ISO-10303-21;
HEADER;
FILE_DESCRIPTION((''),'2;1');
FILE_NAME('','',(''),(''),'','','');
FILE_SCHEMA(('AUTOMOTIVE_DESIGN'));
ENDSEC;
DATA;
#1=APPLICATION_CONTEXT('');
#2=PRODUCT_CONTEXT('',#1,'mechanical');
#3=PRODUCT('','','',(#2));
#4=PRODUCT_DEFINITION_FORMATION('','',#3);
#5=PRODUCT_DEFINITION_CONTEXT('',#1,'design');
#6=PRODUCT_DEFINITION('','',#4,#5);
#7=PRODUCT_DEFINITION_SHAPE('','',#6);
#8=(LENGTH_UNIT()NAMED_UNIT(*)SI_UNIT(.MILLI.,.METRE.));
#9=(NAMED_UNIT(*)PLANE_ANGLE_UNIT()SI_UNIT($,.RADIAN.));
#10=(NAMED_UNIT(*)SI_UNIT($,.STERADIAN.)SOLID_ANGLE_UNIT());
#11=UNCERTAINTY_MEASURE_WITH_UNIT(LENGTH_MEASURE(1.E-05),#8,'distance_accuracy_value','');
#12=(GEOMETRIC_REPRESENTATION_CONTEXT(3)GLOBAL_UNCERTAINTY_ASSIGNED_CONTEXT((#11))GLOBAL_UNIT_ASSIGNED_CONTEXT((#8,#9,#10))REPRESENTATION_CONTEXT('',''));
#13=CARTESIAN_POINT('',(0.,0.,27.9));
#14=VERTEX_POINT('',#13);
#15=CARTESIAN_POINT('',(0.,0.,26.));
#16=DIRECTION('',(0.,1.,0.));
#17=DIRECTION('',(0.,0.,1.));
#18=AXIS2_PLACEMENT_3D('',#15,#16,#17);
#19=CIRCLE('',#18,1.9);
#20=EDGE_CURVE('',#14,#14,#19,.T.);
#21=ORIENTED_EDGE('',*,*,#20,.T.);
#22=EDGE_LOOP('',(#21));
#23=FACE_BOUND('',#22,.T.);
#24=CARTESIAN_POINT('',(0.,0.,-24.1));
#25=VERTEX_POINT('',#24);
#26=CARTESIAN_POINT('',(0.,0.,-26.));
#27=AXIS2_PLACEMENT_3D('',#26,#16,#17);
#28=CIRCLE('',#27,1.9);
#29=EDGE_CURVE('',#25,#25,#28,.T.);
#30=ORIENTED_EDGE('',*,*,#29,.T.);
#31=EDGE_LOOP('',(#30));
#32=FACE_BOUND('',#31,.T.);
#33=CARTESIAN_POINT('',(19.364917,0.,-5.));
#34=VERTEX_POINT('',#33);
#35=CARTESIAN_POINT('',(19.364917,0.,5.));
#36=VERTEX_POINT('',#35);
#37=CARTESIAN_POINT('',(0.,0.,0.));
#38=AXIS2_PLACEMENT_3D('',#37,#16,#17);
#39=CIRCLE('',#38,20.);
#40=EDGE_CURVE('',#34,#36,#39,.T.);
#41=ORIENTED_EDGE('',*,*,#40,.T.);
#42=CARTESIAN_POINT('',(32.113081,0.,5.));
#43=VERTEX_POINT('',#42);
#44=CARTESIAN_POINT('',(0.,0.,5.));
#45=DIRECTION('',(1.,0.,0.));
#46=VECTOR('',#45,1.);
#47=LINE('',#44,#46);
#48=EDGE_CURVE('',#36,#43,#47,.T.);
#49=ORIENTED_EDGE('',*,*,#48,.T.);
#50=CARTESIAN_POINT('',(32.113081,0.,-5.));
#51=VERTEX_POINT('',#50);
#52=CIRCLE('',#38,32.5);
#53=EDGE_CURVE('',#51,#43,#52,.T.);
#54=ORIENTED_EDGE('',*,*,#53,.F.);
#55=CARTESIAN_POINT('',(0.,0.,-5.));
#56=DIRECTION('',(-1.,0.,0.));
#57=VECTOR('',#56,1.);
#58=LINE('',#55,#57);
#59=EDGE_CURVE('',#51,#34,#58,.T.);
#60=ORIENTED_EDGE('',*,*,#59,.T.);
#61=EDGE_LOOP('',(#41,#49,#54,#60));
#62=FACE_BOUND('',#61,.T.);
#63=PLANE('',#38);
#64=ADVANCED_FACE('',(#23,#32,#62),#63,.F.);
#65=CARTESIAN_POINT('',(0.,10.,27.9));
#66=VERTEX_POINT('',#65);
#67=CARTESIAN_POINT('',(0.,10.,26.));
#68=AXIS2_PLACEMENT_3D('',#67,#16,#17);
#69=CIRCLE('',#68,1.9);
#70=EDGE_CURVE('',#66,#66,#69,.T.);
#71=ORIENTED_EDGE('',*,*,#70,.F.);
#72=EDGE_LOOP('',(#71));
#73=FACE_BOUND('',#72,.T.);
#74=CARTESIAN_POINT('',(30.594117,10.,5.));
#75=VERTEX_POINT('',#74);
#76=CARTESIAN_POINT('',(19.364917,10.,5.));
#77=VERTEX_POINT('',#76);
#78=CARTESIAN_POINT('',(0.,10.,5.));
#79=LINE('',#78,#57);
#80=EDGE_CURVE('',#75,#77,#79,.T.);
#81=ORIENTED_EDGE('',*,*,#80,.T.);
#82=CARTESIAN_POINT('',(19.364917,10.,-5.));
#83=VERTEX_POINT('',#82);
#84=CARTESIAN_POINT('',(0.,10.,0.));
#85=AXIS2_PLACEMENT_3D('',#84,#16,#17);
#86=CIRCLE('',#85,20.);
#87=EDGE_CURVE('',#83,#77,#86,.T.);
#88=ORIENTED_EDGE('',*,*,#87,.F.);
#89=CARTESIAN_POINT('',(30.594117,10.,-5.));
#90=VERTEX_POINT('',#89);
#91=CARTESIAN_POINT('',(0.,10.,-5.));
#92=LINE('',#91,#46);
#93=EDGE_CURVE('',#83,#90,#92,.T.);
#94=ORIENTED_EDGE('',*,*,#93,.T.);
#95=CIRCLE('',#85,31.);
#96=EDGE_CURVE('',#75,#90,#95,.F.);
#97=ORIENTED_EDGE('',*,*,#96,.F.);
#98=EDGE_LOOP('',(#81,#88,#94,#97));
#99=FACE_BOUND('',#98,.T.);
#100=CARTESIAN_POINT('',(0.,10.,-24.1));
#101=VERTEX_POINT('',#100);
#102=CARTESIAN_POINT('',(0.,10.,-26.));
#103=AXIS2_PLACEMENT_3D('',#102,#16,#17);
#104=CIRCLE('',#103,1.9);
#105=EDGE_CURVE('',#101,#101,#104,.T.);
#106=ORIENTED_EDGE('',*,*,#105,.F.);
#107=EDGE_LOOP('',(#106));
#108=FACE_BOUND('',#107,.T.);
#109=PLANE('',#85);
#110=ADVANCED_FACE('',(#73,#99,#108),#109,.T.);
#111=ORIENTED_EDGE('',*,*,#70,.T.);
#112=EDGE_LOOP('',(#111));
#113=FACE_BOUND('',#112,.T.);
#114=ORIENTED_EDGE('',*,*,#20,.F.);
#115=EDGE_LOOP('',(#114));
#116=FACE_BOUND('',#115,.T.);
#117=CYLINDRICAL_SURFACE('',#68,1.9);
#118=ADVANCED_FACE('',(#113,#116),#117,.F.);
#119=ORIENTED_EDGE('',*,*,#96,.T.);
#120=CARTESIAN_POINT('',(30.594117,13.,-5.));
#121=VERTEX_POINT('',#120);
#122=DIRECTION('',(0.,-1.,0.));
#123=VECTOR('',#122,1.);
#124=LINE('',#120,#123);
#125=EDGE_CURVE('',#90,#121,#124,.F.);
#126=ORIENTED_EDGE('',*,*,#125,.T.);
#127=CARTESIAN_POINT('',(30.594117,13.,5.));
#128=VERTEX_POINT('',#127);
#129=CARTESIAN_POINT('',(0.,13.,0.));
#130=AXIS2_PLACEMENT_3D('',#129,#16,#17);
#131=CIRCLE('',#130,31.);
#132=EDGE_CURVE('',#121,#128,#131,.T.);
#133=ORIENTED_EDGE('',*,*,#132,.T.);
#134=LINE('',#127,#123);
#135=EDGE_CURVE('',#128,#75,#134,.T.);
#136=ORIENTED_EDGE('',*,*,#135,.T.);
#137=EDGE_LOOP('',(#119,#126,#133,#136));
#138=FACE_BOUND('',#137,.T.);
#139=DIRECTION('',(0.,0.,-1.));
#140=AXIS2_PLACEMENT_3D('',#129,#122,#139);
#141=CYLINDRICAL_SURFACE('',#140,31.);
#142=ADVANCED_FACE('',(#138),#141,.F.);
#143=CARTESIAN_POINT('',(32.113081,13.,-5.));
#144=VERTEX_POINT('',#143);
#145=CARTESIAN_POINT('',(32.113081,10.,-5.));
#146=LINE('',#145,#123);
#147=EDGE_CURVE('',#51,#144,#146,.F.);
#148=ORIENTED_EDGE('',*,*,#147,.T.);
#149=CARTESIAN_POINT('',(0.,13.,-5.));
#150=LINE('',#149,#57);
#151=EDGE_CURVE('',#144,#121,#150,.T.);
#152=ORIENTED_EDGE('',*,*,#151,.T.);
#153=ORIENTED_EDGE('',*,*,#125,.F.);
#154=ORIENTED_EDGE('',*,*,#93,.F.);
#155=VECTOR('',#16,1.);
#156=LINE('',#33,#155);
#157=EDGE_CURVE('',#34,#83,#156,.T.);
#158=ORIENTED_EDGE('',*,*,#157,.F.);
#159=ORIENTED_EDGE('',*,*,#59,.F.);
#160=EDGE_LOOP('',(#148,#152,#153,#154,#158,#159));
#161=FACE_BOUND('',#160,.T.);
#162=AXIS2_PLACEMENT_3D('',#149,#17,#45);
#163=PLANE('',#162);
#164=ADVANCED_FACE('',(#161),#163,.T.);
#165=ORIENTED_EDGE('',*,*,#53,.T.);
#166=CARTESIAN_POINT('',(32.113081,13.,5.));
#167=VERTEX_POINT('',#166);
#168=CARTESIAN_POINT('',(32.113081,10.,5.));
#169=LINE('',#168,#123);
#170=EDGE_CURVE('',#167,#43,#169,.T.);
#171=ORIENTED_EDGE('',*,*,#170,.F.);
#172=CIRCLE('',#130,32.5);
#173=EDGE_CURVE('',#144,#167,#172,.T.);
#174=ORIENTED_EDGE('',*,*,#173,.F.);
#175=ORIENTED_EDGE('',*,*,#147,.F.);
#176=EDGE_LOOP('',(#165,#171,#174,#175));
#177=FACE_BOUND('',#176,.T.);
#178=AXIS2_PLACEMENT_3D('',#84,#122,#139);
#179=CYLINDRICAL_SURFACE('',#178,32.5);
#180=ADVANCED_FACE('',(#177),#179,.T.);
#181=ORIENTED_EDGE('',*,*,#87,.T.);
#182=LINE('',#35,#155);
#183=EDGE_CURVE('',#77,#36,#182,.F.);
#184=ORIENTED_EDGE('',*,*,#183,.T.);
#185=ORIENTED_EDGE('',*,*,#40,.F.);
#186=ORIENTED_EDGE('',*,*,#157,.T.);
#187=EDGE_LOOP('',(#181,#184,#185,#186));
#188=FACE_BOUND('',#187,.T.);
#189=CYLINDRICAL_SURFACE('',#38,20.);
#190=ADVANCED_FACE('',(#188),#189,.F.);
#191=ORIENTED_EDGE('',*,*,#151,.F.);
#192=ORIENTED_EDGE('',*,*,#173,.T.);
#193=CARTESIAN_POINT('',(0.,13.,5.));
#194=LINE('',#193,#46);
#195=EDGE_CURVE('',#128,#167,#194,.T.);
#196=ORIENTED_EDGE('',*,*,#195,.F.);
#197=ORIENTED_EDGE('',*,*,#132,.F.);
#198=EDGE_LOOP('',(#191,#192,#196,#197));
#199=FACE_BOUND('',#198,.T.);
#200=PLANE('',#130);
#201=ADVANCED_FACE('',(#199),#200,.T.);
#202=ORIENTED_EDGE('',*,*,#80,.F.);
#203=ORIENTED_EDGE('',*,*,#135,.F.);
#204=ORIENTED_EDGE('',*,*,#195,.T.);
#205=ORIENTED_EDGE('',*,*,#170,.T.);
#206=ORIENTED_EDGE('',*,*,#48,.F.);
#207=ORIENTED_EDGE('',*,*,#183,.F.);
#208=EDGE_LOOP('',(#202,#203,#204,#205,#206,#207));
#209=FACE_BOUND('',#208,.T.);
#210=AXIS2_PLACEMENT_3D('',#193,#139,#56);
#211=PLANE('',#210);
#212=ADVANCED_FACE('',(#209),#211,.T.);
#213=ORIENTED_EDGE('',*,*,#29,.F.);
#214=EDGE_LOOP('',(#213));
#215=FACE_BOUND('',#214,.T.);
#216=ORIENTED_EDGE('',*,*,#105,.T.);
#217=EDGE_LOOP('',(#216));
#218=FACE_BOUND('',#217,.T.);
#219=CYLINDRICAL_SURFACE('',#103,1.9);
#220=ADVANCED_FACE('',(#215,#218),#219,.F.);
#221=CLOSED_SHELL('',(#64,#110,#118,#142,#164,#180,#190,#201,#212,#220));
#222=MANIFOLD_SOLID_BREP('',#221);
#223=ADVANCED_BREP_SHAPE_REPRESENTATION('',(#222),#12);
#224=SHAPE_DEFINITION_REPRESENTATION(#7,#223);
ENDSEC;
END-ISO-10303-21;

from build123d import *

# Parameters (mm, degrees)
SKETCH1_R                      = 32.5
BOSS_EXTRUDE1_DEPTH            = 10
SKETCH2_R                      = 32.5
SKETCH2_R_2                    = 31
BOSS_EXTRUDE2_DEPTH            = 3
CUT_EXTRUDE1_DEPTH             = 3
CUT_EXTRUDE1_DEPTH_BACK        = 48.037219306
SKETCH3_W                      = 39.818487818
SKETCH3_H                      = 10
FILLET1_R                      = 5
F_3_8_3_8_DIAMETER_HOLE1_D     = 3.8
F_3_8_3_8_DIAMETER_HOLE1_DEPTH = 10
F_3_8_3_8_DIAMETER_HOLE1_TIP   = 1.141635176
SKETCH6_R                      = 20
CUT_EXTRUDE2_DEPTH             = 10


with BuildPart() as part:
    # Sketch1 → Boss-Extrude1 (new body)
    with BuildSketch(Plane(origin=(0, 0, 0), x_dir=(1, 0, 0), z_dir=(0, 1, 0))):
        with Locations(Location((0, 0, 0), (0, 0, 270))):
            Circle(SKETCH1_R)
    extrude(amount=BOSS_EXTRUDE1_DEPTH)

    # Sketch2 → Boss-Extrude2 (add)
    with BuildSketch(Plane(origin=(0, 10, 0), x_dir=(1, 0, 0), z_dir=(0, 1, 0))):
        with Locations(Location((0, 0, 0), (0, 0, 270))):
            Circle(SKETCH2_R)
        with Locations(Location((0, 0, 0), (0, 0, 270))):
            Circle(SKETCH2_R_2, mode=Mode.SUBTRACT)
    extrude(amount=BOSS_EXTRUDE2_DEPTH)

    # Sketch3 → Cut-Extrude1 (cut, two sides: drawn at the far end of the back side and taken through both)
    with BuildSketch(Plane(origin=(0, 10, 0), x_dir=(1, 0, 0), z_dir=(0, 1, 0)).offset(-CUT_EXTRUDE1_DEPTH_BACK)):
        with Locations((19.909243909, 0)):
            Rectangle(SKETCH3_W, SKETCH3_H)
    extrude(amount=CUT_EXTRUDE1_DEPTH + CUT_EXTRUDE1_DEPTH_BACK, mode=Mode.SUBTRACT)

    # Fillet1
    fillet1_edges = [part.edges().sort_by_distance(p)[0] for p in [
        (0, 5, 5),
        (0, 5, -5),
    ]]
    fillet(fillet1_edges, radius=FILLET1_R - 0.0001)  # a hair under: the kernel refuses the full size

    # Ø3.8 (3.8) Diameter Hole1
    with Locations(Plane(origin=(0, 10, 0), x_dir=(1, 0, 0), z_dir=(0, 1, 0))):
        with Locations((0, 26), (0, -26)):
            Hole(F_3_8_3_8_DIAMETER_HOLE1_D / 2, depth=F_3_8_3_8_DIAMETER_HOLE1_DEPTH)
            with Locations((0, 0, -(F_3_8_3_8_DIAMETER_HOLE1_DEPTH + F_3_8_3_8_DIAMETER_HOLE1_TIP / 2))):  # 118° drill point
                Cone(0, F_3_8_3_8_DIAMETER_HOLE1_D / 2, F_3_8_3_8_DIAMETER_HOLE1_TIP, mode=Mode.SUBTRACT)

    # Sketch6 → Cut-Extrude2 (cut)
    with BuildSketch(Plane(origin=(0, 10, 0), x_dir=(1, 0, 0), z_dir=(0, 1, 0))):
        Circle(SKETCH6_R)
    extrude(amount=-CUT_EXTRUDE2_DEPTH, mode=Mode.SUBTRACT)


solid = part.part
